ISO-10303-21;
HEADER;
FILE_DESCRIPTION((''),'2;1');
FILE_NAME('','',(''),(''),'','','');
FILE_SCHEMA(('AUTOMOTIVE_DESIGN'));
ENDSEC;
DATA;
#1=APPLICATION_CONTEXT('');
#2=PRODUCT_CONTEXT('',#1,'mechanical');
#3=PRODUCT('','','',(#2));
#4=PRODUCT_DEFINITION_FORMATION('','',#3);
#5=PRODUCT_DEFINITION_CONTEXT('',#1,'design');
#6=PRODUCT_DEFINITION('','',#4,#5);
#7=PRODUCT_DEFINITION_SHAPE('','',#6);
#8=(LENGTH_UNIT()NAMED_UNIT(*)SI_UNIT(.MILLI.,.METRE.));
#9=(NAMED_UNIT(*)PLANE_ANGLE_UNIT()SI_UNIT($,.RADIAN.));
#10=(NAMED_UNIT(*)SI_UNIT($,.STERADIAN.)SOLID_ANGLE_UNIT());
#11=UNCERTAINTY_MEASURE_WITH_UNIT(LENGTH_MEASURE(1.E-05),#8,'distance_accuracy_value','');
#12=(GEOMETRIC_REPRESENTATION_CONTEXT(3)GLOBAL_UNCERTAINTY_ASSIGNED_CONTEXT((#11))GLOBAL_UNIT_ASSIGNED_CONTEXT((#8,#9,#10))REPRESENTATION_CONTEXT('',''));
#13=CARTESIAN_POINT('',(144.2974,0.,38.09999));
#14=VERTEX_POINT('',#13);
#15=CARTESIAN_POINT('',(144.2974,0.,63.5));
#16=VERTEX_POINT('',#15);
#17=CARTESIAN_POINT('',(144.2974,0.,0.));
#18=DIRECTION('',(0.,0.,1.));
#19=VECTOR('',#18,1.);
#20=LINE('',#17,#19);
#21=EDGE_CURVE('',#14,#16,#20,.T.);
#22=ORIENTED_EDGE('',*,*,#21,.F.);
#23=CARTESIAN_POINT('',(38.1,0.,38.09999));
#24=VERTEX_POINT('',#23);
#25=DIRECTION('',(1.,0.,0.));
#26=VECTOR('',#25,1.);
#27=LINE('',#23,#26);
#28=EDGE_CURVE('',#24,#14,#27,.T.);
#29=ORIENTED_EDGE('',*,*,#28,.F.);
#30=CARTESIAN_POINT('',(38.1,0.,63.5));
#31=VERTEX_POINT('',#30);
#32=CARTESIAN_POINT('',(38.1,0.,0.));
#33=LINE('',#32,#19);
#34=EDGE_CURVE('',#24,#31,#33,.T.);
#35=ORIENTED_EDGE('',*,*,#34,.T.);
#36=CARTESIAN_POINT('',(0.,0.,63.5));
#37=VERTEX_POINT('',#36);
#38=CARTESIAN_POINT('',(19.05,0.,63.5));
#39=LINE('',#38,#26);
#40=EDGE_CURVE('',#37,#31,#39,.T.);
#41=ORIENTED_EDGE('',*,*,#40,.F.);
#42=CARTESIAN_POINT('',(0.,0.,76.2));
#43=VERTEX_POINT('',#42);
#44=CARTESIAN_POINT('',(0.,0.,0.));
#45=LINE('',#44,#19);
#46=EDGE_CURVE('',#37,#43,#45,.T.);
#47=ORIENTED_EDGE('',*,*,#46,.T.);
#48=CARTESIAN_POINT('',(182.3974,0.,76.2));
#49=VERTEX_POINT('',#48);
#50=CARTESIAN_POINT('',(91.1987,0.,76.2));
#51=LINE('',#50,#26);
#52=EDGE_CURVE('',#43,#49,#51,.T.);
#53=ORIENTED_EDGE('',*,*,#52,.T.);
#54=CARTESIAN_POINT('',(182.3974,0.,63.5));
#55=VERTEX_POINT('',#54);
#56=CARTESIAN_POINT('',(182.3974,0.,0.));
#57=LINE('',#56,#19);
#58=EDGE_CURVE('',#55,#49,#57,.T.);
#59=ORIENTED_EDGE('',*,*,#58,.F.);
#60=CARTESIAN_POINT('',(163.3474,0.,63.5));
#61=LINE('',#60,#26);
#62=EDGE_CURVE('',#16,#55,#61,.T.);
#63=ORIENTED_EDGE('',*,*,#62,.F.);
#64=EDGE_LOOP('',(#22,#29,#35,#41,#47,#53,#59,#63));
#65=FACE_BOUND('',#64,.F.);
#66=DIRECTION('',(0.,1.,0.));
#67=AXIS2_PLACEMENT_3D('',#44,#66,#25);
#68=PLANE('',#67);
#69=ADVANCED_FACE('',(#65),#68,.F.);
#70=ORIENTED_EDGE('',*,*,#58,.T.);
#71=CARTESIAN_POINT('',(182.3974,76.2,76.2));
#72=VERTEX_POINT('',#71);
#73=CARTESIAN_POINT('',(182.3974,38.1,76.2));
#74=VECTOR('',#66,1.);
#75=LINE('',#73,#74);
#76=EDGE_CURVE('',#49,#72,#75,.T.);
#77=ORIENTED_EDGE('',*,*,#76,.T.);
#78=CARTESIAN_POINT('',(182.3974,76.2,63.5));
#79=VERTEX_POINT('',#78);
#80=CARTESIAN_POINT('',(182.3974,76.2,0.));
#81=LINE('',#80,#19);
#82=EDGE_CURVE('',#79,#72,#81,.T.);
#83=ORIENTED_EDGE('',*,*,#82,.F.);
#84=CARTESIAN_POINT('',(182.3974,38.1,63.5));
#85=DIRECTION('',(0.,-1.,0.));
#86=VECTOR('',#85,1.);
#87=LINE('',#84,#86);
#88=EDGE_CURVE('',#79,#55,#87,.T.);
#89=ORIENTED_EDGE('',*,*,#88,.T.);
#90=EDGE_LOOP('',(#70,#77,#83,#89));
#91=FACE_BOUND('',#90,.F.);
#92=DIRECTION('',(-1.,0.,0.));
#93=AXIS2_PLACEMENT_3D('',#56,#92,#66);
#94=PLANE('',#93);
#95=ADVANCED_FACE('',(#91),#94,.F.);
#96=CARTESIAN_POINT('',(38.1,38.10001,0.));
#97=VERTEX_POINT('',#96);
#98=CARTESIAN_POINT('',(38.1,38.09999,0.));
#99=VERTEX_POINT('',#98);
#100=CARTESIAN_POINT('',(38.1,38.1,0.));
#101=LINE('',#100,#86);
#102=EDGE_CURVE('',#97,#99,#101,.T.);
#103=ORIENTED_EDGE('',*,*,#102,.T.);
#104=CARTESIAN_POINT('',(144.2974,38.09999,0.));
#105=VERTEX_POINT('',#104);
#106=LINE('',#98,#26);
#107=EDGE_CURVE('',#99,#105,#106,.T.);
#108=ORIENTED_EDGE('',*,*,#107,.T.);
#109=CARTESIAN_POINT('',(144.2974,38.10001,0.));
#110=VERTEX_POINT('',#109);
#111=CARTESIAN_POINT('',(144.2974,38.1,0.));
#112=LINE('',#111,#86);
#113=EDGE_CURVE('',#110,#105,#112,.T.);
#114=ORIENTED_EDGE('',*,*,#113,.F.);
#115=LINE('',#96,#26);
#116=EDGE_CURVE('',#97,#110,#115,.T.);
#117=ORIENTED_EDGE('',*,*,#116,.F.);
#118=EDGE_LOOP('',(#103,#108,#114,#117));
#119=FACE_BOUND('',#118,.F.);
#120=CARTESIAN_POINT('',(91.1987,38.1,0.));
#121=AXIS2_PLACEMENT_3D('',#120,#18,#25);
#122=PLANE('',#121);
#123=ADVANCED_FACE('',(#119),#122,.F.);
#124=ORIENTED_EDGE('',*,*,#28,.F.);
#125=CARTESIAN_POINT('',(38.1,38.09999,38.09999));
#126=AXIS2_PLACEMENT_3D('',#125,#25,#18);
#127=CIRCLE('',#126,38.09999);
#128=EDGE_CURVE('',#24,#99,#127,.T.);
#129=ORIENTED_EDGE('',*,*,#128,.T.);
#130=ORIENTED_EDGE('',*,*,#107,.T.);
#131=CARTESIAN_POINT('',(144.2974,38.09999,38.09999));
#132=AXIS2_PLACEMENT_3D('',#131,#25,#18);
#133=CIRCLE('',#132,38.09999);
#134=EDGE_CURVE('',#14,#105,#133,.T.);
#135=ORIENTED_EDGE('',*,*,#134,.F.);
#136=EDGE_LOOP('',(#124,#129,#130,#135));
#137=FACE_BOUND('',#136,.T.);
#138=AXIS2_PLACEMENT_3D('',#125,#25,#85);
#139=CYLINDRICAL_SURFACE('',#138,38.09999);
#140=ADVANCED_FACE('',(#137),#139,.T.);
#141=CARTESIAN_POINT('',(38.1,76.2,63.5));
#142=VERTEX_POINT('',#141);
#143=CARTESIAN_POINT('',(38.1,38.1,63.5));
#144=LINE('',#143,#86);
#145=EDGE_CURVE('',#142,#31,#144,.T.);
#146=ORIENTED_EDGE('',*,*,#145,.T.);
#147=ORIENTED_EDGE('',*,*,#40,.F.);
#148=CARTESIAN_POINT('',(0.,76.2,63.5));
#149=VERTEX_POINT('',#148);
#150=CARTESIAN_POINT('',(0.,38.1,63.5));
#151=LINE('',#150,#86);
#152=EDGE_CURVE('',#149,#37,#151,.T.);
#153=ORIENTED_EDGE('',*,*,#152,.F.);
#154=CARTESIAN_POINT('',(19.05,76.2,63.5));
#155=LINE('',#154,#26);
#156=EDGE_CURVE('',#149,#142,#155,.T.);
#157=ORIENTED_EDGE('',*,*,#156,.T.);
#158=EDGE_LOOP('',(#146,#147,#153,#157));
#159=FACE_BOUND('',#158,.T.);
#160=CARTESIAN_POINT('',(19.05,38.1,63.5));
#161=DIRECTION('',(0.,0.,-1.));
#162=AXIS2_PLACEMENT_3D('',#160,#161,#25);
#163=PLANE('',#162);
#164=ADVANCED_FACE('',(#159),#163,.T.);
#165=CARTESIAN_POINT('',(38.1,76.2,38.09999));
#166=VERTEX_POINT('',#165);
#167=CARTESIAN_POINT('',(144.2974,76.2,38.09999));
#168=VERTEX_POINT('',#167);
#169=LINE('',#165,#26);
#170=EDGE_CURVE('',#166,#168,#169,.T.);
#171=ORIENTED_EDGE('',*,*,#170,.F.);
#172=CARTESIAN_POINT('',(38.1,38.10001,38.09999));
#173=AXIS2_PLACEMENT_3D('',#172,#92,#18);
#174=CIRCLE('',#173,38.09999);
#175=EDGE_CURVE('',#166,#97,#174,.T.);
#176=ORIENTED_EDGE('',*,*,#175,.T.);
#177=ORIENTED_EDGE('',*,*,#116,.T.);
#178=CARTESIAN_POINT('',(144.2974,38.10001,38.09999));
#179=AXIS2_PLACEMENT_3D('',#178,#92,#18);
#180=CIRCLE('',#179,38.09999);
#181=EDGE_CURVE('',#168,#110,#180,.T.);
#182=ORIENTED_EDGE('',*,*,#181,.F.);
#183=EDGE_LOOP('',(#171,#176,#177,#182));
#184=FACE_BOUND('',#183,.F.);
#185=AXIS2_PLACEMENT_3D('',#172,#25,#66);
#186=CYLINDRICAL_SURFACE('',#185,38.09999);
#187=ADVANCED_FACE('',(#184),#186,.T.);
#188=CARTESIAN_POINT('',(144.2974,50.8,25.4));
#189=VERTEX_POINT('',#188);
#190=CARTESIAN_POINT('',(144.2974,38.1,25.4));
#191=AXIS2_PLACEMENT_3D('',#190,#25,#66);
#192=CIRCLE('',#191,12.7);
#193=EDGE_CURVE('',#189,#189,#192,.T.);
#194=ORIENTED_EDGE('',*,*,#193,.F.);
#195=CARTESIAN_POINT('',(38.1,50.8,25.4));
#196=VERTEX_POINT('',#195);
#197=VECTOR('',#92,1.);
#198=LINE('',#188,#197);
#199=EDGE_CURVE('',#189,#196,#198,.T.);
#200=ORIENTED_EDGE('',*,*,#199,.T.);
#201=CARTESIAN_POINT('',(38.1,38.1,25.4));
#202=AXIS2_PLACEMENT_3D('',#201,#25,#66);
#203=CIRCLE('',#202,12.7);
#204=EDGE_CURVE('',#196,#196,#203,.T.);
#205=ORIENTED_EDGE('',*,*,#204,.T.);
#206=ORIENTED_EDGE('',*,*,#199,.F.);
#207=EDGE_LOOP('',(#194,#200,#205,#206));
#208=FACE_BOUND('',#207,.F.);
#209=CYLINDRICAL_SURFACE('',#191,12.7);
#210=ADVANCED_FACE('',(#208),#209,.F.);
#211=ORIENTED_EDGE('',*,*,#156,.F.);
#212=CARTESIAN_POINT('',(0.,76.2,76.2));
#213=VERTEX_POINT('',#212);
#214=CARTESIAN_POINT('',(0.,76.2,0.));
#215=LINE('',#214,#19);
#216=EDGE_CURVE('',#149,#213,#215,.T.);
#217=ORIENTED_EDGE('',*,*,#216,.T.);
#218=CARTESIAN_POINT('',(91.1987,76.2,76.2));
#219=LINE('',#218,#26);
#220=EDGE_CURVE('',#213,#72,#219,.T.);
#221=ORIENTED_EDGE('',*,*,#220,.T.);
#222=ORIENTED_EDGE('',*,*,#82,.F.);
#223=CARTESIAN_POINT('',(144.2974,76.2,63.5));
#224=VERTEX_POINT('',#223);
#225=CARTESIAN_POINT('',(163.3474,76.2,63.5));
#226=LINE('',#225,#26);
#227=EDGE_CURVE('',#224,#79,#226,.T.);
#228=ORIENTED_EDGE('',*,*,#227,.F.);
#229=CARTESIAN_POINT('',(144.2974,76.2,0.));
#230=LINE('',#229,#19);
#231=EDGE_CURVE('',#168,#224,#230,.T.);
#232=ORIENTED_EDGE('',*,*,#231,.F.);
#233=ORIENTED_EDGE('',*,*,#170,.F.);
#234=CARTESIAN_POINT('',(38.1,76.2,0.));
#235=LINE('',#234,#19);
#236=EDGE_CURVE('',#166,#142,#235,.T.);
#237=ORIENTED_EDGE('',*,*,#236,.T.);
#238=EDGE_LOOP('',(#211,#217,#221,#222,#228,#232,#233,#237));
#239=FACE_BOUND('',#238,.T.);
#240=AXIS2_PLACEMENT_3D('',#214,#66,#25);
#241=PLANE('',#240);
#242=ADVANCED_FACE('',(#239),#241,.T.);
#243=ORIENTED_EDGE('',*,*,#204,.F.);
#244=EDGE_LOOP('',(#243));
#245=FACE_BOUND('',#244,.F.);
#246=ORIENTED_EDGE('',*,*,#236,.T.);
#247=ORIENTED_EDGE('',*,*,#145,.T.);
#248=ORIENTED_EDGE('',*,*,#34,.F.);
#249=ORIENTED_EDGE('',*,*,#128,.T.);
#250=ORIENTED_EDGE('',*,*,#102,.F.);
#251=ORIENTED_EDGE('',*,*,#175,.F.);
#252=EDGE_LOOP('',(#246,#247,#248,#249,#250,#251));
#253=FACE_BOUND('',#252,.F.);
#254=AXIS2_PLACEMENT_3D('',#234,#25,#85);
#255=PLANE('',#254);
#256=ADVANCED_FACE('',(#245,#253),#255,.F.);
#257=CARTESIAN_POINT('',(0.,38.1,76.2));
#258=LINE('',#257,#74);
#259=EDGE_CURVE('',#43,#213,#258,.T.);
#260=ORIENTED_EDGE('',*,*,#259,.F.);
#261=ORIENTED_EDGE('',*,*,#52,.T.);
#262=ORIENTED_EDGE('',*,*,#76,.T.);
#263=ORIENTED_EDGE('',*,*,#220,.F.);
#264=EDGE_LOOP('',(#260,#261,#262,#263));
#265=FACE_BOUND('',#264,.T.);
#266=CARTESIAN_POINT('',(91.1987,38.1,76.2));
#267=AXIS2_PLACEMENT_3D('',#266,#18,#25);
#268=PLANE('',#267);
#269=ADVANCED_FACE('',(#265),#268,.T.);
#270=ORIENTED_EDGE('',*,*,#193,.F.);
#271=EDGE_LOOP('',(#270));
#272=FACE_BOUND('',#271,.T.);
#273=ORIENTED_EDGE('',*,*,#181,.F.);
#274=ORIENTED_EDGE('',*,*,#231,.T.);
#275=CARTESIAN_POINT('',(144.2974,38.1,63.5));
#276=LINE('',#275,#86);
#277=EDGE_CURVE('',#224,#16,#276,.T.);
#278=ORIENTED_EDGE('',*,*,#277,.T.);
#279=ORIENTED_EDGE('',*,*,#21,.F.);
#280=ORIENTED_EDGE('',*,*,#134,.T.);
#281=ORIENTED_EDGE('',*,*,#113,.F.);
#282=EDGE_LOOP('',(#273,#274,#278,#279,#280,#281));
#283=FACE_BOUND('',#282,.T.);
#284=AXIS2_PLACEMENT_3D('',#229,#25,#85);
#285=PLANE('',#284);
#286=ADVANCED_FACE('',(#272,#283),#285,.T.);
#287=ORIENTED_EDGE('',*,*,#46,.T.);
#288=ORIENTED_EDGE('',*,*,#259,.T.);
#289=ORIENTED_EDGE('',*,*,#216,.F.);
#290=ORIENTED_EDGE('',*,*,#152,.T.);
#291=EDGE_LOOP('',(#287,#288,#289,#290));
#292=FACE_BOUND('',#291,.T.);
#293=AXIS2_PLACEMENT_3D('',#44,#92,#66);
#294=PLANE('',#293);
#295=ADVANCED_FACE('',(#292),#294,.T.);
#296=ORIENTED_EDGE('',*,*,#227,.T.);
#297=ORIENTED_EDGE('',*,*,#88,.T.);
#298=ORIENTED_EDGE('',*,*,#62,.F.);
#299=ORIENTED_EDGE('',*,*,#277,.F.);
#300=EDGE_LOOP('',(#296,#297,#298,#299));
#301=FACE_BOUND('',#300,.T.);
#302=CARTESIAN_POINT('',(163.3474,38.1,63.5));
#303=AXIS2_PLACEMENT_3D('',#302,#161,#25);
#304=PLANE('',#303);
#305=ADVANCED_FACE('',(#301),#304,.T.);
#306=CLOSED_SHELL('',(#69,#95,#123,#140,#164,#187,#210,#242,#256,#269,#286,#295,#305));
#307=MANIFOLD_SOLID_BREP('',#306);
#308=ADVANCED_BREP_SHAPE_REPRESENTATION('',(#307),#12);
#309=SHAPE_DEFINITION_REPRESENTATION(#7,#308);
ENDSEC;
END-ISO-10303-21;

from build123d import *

# Parameters (mm, degrees)
F0_W     = 182.3974
F0_H     = 76.2
F1_DEPTH = 76.2
F2_W     = 38.1
F2_H     = 76.2
F3_DEPTH = 63.5
F4_R     = 38.09999
F5_R     = 12.7
F6_DEPTH = 144.2984


# Not quite as in the source:
# - a fillet or chamfer is up to 0.001 mm smaller than in the source, because OpenCascade refuses the exact size


with BuildPart() as f1:
    # F0 (on Top) → F1 (new body)
    with BuildSketch(Plane.XY):
        with Locations((91.1987, 38.1)):
            Rectangle(F0_W, F0_H)
    extrude(amount=F1_DEPTH)

    # F2 (on face) → F3 (cut)
    with BuildSketch(Plane(origin=(0, 0, 0), x_dir=(1, 0, 0), z_dir=(0, 0, -1))):
        with Locations((163.3474, -38.1)):
            Rectangle(F2_W, F2_H)
        with Locations((19.05, -38.1)):
            Rectangle(F2_W, F2_H)
    extrude(amount=-F3_DEPTH, mode=Mode.SUBTRACT)

    # F4 (radius 38.1 in the source; OpenCascade refuses exactly that, so slightly less here)
    f4_edges = [f1.edges().sort_by_distance(p)[0] for p in [
        (91.1987, 0, 0),
        (91.1987, 76.2, 0),
    ]]
    fillet(f4_edges, radius=F4_R)

    # F5 (on face) → F6 (cut, through all)
    with BuildSketch(Plane.YZ.offset(144.2974)):
        with Locations((38.1, 25.4)):
            Circle(F5_R)
    extrude(amount=-F6_DEPTH, mode=Mode.SUBTRACT)


solid = f1.part
